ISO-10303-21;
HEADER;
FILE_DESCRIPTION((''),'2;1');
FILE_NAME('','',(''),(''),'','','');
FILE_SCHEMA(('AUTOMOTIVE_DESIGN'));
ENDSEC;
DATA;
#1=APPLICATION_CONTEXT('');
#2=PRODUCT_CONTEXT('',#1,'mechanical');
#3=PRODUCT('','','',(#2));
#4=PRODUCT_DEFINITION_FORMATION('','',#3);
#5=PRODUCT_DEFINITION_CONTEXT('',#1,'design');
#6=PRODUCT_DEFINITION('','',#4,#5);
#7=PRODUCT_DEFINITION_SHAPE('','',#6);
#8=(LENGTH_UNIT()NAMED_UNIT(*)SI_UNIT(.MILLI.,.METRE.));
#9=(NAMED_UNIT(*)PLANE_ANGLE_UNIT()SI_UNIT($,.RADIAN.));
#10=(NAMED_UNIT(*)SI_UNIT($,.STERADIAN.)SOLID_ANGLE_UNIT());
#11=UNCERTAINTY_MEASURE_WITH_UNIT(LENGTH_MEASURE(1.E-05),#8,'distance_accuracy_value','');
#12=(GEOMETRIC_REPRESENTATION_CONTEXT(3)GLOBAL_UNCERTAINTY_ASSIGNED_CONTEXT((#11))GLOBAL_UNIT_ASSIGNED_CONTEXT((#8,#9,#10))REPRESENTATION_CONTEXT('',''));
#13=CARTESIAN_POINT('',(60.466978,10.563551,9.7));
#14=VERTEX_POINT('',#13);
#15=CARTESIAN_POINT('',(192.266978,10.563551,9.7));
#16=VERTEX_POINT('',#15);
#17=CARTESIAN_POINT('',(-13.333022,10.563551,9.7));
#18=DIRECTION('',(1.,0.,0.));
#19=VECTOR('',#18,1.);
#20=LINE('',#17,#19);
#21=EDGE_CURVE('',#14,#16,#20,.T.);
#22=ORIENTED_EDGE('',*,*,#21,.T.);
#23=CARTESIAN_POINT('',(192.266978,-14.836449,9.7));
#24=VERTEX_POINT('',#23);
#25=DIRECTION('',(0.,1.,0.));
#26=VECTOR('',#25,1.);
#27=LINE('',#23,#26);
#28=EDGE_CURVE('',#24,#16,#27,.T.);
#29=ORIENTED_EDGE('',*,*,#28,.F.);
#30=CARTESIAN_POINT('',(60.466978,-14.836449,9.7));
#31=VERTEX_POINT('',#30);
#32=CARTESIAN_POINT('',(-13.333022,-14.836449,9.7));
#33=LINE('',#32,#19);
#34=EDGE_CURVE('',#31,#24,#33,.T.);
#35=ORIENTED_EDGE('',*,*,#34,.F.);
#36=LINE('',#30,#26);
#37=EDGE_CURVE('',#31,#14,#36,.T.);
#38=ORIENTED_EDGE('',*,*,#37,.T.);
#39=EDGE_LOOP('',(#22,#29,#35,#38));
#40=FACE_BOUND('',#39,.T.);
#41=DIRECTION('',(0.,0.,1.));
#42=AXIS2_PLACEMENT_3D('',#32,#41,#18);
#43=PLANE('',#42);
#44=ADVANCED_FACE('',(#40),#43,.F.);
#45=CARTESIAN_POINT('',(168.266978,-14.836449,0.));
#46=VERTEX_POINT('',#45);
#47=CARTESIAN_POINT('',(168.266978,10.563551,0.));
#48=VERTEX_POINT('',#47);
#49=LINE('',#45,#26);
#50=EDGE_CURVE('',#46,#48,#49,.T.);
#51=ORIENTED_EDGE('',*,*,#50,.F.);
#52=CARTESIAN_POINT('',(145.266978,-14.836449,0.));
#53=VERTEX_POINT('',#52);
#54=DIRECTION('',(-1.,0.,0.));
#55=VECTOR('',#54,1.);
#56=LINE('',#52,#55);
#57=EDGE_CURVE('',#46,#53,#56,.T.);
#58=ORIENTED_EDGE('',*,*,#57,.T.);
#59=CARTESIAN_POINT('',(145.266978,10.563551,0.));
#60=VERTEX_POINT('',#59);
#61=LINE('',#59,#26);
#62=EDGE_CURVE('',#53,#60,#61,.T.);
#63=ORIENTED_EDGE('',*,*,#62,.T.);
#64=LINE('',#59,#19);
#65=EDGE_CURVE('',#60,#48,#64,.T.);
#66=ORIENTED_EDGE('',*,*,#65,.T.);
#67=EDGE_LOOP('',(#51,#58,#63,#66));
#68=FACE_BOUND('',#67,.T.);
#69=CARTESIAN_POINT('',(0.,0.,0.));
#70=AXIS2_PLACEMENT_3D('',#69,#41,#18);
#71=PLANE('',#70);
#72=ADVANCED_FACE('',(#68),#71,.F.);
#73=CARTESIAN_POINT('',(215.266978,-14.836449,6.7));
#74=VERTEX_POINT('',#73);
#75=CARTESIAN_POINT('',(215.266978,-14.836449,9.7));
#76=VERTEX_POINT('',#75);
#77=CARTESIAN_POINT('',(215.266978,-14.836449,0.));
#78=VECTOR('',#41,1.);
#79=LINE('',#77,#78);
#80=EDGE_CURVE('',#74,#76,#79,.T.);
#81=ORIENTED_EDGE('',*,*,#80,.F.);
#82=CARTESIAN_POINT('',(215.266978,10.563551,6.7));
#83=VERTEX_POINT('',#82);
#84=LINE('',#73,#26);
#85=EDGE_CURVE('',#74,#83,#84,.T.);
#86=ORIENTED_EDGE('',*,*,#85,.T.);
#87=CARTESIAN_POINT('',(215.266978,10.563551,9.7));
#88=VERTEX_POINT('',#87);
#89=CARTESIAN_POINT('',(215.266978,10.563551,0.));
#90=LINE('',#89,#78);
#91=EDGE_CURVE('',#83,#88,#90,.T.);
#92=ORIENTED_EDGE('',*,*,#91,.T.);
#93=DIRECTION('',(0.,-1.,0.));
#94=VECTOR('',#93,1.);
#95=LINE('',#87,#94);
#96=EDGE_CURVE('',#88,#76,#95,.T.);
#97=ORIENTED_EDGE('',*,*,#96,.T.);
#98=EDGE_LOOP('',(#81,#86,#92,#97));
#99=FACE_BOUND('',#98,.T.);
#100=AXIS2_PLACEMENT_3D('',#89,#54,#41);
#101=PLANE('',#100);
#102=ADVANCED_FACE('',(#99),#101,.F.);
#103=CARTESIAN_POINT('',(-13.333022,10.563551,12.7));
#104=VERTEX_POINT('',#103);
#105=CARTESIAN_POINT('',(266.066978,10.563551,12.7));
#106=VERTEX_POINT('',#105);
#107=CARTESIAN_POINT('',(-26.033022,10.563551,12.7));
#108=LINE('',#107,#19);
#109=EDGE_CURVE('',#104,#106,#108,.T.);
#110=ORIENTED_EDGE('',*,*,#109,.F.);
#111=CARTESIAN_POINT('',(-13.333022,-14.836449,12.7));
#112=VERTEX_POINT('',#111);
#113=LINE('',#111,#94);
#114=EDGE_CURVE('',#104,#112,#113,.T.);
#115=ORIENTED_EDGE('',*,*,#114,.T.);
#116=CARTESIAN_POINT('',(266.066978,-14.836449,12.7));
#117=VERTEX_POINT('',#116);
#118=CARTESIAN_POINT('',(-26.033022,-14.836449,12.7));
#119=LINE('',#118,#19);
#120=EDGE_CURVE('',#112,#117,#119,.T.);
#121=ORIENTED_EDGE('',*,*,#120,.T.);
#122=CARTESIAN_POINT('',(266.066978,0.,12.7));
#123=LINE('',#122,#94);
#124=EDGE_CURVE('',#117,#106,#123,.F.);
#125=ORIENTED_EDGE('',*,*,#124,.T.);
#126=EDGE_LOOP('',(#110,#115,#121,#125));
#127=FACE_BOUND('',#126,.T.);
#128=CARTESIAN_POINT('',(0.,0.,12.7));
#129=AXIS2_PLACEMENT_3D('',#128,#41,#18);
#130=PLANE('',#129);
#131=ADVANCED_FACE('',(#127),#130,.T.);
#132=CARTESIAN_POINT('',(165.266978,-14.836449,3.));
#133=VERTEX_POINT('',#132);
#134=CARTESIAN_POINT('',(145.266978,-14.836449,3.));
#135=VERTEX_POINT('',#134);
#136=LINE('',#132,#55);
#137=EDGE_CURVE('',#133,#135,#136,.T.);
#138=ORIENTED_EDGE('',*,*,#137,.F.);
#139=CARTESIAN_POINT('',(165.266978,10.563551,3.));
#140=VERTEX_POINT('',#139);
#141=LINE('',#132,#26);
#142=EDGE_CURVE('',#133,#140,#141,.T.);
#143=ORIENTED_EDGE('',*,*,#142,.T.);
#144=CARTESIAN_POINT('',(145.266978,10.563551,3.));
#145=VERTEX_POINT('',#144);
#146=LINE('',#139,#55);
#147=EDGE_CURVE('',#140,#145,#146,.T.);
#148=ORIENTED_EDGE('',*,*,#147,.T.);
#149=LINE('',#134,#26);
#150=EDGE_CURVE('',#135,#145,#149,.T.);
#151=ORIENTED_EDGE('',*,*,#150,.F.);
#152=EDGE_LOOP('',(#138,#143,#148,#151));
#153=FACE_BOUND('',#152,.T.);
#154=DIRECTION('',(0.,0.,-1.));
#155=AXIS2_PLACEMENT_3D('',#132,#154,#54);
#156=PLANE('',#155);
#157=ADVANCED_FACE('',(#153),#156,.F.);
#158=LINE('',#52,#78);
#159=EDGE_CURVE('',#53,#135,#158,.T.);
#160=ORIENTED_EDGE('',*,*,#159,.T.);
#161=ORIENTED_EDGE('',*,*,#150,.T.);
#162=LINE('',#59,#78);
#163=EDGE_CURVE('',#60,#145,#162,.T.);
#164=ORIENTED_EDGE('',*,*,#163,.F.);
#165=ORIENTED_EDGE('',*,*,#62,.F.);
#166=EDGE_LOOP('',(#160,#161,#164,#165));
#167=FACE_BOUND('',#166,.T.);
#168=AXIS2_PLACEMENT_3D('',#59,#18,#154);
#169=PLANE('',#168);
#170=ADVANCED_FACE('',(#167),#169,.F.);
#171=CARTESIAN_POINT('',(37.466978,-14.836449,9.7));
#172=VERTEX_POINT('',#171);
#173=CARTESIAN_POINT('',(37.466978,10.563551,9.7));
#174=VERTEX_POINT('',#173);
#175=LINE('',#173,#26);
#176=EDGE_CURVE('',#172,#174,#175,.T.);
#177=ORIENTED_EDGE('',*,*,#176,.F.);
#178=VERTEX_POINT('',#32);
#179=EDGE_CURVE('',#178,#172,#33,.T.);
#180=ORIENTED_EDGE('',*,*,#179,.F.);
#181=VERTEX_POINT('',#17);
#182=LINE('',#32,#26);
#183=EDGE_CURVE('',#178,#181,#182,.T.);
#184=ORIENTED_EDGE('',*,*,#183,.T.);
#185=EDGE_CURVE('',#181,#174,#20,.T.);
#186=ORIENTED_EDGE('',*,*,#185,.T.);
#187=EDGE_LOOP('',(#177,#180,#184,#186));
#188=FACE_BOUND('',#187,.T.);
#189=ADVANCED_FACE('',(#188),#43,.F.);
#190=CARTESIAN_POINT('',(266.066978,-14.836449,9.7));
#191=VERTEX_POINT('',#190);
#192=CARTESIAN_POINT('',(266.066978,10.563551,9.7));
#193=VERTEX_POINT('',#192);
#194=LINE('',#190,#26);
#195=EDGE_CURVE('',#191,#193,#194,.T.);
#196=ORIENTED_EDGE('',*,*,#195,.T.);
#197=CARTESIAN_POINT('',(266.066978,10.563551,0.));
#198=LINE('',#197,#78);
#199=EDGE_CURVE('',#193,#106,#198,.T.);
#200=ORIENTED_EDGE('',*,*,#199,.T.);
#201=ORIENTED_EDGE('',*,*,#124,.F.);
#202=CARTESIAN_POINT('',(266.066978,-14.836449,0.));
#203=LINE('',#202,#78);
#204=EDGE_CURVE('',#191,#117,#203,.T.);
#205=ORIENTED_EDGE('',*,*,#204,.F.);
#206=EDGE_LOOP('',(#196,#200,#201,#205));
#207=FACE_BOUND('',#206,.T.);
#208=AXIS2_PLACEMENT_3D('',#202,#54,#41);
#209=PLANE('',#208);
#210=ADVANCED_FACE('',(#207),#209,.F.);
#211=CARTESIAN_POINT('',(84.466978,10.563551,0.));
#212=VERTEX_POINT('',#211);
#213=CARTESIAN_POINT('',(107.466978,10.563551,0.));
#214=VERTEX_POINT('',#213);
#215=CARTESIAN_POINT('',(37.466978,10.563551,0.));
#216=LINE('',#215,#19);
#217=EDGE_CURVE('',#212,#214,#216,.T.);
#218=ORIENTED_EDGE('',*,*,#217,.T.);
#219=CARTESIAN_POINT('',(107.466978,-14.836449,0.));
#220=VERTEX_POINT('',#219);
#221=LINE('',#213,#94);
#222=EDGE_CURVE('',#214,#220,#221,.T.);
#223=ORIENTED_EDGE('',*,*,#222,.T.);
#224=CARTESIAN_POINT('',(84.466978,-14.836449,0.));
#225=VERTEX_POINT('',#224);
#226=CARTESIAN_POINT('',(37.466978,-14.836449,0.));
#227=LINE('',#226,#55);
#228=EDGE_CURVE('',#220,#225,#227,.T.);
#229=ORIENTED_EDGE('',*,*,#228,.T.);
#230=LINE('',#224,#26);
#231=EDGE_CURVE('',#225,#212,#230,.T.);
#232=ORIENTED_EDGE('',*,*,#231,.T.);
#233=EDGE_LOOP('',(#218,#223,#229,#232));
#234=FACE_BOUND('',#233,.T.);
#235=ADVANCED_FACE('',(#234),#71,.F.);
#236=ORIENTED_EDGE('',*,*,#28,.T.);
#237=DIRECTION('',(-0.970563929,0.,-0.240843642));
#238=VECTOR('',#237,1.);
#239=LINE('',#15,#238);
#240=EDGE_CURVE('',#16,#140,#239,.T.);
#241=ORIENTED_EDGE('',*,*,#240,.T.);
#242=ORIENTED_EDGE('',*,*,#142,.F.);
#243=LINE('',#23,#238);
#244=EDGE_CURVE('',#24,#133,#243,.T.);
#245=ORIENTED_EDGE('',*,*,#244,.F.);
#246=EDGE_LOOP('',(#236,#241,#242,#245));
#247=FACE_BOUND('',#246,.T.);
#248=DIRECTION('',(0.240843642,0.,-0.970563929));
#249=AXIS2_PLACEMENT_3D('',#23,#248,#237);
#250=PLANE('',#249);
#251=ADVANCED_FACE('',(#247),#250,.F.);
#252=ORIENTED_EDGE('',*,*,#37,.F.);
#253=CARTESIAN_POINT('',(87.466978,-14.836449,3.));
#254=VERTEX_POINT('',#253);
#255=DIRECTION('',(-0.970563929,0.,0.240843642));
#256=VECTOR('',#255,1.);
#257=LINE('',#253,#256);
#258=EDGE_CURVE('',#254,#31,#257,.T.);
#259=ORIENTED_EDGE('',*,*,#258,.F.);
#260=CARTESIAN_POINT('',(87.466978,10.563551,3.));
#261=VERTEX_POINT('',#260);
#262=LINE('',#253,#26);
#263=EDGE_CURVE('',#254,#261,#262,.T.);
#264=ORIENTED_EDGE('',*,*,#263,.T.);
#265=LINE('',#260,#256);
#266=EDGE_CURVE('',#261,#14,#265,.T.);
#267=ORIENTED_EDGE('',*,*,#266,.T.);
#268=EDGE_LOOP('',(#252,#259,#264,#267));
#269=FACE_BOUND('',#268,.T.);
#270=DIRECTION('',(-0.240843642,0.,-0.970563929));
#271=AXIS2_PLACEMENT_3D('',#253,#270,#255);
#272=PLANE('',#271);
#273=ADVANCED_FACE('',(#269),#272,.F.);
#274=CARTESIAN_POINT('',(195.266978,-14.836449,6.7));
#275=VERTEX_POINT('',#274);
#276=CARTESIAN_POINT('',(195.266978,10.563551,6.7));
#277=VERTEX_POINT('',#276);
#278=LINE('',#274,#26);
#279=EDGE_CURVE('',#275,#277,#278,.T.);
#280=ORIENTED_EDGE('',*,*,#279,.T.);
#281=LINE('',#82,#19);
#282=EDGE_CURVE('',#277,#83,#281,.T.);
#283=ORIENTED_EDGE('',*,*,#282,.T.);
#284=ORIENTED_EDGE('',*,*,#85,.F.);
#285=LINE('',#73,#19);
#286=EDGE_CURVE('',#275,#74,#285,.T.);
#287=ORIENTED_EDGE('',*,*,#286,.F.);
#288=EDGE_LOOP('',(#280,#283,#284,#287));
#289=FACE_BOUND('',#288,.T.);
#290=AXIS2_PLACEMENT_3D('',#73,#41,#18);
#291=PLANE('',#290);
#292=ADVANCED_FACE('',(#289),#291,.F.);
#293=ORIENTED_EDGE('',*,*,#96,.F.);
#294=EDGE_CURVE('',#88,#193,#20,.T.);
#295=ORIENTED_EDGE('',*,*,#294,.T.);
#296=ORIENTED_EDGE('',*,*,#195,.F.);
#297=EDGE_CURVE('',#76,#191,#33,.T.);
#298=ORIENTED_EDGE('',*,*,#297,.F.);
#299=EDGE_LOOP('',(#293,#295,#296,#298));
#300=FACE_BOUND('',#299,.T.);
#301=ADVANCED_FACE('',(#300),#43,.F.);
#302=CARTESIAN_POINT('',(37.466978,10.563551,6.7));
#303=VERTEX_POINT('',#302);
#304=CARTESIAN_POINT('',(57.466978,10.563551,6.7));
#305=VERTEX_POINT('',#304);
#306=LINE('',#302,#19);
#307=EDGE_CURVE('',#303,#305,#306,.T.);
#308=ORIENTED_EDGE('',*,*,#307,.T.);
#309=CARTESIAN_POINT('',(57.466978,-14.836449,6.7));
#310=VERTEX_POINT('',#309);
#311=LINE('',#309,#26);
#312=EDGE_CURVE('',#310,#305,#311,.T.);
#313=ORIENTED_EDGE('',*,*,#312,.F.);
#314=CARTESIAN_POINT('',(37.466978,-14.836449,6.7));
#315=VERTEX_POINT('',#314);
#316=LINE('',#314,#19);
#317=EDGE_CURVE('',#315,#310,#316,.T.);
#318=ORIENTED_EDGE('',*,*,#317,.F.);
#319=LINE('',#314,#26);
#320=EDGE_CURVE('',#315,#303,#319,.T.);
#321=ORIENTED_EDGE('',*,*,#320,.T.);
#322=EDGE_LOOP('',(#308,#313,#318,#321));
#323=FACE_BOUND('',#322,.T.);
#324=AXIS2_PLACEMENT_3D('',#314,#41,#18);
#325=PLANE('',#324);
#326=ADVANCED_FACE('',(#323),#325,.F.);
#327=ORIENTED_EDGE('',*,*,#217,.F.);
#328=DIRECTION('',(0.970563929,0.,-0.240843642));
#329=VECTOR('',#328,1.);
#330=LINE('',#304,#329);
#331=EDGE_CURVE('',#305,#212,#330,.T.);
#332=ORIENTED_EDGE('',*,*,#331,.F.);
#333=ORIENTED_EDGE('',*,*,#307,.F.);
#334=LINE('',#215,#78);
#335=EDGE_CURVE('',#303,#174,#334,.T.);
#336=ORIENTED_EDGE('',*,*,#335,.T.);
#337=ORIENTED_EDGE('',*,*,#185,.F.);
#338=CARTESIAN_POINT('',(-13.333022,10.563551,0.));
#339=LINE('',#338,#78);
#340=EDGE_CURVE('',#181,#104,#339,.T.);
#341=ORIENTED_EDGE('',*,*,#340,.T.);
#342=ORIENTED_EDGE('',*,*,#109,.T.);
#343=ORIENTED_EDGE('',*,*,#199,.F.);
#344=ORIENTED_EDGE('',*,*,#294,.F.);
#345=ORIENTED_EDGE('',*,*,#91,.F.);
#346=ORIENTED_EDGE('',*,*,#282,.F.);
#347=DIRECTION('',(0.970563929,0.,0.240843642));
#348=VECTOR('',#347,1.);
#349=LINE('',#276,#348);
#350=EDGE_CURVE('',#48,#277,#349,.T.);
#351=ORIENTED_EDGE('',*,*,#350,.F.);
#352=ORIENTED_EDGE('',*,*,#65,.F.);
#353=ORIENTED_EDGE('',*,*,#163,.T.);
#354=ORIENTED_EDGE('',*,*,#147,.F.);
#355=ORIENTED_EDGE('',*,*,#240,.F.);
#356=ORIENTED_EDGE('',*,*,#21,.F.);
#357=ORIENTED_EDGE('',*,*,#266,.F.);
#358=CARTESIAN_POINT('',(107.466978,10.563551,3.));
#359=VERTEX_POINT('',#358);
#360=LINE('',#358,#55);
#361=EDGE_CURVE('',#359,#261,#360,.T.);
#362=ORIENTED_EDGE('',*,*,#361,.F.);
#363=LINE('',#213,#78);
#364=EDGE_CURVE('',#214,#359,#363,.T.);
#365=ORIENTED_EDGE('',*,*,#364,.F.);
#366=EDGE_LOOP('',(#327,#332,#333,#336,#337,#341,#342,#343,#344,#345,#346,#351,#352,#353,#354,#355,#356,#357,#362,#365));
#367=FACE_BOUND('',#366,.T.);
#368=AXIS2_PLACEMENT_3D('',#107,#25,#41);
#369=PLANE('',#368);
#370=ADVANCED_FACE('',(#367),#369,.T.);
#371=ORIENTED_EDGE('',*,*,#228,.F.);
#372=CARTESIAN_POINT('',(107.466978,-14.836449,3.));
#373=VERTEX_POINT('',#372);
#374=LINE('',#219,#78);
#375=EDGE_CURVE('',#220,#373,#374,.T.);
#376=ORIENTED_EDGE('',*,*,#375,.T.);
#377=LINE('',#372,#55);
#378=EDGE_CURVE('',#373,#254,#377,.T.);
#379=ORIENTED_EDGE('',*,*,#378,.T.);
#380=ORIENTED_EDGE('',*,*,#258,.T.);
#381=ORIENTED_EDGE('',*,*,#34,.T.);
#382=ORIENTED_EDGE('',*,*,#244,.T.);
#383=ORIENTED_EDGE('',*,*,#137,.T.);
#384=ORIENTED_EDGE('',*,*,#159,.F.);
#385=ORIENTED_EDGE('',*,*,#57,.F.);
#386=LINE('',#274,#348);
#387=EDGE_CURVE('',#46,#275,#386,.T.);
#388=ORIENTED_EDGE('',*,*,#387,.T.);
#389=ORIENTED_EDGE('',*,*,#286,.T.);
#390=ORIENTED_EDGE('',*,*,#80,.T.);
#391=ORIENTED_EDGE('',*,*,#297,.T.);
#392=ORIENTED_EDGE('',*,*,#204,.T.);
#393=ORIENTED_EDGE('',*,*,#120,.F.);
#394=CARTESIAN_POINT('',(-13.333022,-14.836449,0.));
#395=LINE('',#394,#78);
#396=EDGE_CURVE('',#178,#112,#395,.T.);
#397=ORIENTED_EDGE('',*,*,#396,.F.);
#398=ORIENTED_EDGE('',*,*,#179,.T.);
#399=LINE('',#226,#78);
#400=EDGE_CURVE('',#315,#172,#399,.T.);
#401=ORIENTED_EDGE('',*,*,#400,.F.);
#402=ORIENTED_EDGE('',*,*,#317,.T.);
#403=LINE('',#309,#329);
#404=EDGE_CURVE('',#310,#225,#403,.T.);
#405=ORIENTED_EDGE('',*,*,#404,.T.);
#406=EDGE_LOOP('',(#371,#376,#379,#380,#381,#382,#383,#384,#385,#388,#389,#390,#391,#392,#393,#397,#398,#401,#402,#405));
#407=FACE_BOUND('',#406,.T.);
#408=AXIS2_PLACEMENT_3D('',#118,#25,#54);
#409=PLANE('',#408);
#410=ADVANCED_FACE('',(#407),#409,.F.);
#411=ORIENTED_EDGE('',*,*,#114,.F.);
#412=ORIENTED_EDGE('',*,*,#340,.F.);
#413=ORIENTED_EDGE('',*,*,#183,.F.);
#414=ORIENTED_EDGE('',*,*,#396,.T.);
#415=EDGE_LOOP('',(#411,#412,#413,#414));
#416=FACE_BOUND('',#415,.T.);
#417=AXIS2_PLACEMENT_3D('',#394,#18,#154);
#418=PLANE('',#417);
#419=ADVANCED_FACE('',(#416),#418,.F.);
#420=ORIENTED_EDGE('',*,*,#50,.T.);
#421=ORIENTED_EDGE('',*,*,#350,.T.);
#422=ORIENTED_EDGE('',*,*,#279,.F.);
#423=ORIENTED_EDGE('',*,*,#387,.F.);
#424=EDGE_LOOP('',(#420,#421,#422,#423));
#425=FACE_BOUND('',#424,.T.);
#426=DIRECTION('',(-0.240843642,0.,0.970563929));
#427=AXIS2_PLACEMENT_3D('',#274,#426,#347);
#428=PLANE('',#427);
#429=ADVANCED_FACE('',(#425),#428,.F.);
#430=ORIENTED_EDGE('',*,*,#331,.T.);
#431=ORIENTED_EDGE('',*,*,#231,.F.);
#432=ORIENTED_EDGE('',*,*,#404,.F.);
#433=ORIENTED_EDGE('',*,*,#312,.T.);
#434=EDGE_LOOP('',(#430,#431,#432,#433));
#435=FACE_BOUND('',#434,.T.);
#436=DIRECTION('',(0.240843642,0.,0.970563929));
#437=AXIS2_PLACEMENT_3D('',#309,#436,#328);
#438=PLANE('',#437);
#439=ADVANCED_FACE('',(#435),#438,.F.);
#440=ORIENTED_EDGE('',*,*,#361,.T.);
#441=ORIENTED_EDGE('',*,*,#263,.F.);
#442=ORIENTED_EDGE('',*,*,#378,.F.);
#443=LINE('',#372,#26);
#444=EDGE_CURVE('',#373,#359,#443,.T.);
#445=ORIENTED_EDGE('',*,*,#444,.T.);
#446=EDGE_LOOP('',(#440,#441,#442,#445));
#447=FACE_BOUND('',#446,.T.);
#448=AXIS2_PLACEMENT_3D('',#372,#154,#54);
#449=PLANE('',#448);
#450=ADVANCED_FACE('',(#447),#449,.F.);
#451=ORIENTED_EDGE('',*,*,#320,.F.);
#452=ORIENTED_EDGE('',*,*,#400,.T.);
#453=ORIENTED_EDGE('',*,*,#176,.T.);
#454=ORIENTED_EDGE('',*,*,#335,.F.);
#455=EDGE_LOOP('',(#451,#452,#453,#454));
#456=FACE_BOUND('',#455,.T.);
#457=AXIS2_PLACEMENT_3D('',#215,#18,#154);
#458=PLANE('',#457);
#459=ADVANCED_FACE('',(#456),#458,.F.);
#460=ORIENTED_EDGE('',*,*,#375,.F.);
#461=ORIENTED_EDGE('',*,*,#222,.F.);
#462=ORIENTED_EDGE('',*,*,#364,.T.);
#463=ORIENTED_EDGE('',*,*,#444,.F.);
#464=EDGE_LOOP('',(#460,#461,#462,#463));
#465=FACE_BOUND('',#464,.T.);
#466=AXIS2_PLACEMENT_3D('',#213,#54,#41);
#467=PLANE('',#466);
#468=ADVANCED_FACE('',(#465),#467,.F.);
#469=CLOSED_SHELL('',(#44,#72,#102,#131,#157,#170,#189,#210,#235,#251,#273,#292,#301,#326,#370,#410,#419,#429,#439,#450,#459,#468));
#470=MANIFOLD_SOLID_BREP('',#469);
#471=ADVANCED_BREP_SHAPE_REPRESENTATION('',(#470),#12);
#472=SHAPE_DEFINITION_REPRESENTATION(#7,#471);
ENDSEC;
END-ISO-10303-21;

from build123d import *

# Parameters (mm, degrees)
SKETCH1_W           = 304.8
SKETCH1_H           = 25.4
BOSS_EXTRUDE2_DEPTH = 12.7
FILLET1_R           = 12.7
CUT_EXTRUDE3_DEPTH  = 281.209703849
SKETCH8_W           = 70
SKETCH8_H           = 25.4
BOSS_EXTRUDE3_DEPTH = 9.7
CUT_EXTRUDE4_DEPTH  = 281.209703849
CUT_EXTRUDE5_DEPTH  = 281.209703849
SKETCH13_W          = 12.7
SKETCH13_H          = 25.4
CUT_EXTRUDE7_DEPTH  = 280.450243045


with BuildPart() as part:
    # Sketch1 → Boss-Extrude2 (new body)
    with BuildSketch(Plane.XY):
        with Locations((126.366978193, -2.136448598)):
            Rectangle(SKETCH1_W, SKETCH1_H)
    extrude(amount=BOSS_EXTRUDE2_DEPTH)

    # Fillet1
    fillet1_edges = [part.edges().sort_by_distance(p)[0] for p in [
        (-26.033021807, -2.136448598, 12.7),
        (278.766978193, -2.136448598, 12.7),
    ]]
    fillet(fillet1_edges, radius=FILLET1_R - 0.0001)  # a hair under: the kernel refuses the full size

    # Sketch6 → Cut-Extrude3 (cut, through all)
    with BuildSketch(Plane(origin=(0, 10.563551402, 0), x_dir=(1, 0, 0), z_dir=(0, 1, 0))):
        with BuildLine():
            Line((-23.033021807, 0), (275.766978193, 0))
            ThreePointArc((275.766978193, 0), (272.925913971, -6.858935778), (266.066978193, -9.7))
            Line((266.066978193, -9.7), (-13.333021807, -9.7))
            ThreePointArc((-13.333021807, -9.7), (-20.191957584, -6.858935778), (-23.033021807, 0))
        make_face()
    extrude(amount=-CUT_EXTRUDE3_DEPTH, mode=Mode.SUBTRACT)

    # Sketch8 → Boss-Extrude3 (add)
    with BuildSketch(Plane(origin=(0, 0, 9.7), x_dir=(-1, 0, 0), z_dir=(0, 0, -1))):
        with Locations((-180.266978193, -2.136448598)):
            Rectangle(SKETCH8_W, SKETCH8_H)
        with Locations((-72.466978193, -2.136448598)):
            Rectangle(SKETCH8_W, SKETCH8_H)
    extrude(amount=BOSS_EXTRUDE3_DEPTH)

    # Sketch9 → Cut-Extrude4 (cut, through all)
    with BuildSketch(Plane(origin=(0, 10.563551402, 0), x_dir=(1, 0, 0), z_dir=(0, 1, 0))):
        Polygon((145.266978193, -9.7), (165.266978193, -9.7), (192.266978193, -9.7), (165.266978193, -3), (145.266978193, -3), align=None)
        Polygon((215.266978193, -6.7), (195.266978193, -6.7), (168.266978193, 0), (215.266978193, 0), align=None)
    extrude(amount=-CUT_EXTRUDE4_DEPTH, mode=Mode.SUBTRACT)

    # Sketch12 → Cut-Extrude5 (cut, through all)
    with BuildSketch(Plane(origin=(0, 10.563551402, 0), x_dir=(1, 0, 0), z_dir=(0, 1, 0))):
        Polygon((107.466978193, -9.7), (107.466978193, -3), (87.466978193, -3), (60.466978193, -9.7), align=None)
        Polygon((37.466978193, -6.7), (57.466978193, -6.7), (84.466978193, 0), (37.466978193, 0), align=None)
    extrude(amount=-CUT_EXTRUDE5_DEPTH, mode=Mode.SUBTRACT)

    # Sketch13 → Cut-Extrude7 (cut, through all)
    with BuildSketch(Plane.XY.offset(12.7)):
        with Locations((-19.683021807, -2.136448598)):
            Rectangle(SKETCH13_W, SKETCH13_H)
        with Locations((272.416978193, -2.136448598)):
            Rectangle(SKETCH13_W, SKETCH13_H)
    extrude(amount=-CUT_EXTRUDE7_DEPTH, mode=Mode.SUBTRACT)


solid = part.part
